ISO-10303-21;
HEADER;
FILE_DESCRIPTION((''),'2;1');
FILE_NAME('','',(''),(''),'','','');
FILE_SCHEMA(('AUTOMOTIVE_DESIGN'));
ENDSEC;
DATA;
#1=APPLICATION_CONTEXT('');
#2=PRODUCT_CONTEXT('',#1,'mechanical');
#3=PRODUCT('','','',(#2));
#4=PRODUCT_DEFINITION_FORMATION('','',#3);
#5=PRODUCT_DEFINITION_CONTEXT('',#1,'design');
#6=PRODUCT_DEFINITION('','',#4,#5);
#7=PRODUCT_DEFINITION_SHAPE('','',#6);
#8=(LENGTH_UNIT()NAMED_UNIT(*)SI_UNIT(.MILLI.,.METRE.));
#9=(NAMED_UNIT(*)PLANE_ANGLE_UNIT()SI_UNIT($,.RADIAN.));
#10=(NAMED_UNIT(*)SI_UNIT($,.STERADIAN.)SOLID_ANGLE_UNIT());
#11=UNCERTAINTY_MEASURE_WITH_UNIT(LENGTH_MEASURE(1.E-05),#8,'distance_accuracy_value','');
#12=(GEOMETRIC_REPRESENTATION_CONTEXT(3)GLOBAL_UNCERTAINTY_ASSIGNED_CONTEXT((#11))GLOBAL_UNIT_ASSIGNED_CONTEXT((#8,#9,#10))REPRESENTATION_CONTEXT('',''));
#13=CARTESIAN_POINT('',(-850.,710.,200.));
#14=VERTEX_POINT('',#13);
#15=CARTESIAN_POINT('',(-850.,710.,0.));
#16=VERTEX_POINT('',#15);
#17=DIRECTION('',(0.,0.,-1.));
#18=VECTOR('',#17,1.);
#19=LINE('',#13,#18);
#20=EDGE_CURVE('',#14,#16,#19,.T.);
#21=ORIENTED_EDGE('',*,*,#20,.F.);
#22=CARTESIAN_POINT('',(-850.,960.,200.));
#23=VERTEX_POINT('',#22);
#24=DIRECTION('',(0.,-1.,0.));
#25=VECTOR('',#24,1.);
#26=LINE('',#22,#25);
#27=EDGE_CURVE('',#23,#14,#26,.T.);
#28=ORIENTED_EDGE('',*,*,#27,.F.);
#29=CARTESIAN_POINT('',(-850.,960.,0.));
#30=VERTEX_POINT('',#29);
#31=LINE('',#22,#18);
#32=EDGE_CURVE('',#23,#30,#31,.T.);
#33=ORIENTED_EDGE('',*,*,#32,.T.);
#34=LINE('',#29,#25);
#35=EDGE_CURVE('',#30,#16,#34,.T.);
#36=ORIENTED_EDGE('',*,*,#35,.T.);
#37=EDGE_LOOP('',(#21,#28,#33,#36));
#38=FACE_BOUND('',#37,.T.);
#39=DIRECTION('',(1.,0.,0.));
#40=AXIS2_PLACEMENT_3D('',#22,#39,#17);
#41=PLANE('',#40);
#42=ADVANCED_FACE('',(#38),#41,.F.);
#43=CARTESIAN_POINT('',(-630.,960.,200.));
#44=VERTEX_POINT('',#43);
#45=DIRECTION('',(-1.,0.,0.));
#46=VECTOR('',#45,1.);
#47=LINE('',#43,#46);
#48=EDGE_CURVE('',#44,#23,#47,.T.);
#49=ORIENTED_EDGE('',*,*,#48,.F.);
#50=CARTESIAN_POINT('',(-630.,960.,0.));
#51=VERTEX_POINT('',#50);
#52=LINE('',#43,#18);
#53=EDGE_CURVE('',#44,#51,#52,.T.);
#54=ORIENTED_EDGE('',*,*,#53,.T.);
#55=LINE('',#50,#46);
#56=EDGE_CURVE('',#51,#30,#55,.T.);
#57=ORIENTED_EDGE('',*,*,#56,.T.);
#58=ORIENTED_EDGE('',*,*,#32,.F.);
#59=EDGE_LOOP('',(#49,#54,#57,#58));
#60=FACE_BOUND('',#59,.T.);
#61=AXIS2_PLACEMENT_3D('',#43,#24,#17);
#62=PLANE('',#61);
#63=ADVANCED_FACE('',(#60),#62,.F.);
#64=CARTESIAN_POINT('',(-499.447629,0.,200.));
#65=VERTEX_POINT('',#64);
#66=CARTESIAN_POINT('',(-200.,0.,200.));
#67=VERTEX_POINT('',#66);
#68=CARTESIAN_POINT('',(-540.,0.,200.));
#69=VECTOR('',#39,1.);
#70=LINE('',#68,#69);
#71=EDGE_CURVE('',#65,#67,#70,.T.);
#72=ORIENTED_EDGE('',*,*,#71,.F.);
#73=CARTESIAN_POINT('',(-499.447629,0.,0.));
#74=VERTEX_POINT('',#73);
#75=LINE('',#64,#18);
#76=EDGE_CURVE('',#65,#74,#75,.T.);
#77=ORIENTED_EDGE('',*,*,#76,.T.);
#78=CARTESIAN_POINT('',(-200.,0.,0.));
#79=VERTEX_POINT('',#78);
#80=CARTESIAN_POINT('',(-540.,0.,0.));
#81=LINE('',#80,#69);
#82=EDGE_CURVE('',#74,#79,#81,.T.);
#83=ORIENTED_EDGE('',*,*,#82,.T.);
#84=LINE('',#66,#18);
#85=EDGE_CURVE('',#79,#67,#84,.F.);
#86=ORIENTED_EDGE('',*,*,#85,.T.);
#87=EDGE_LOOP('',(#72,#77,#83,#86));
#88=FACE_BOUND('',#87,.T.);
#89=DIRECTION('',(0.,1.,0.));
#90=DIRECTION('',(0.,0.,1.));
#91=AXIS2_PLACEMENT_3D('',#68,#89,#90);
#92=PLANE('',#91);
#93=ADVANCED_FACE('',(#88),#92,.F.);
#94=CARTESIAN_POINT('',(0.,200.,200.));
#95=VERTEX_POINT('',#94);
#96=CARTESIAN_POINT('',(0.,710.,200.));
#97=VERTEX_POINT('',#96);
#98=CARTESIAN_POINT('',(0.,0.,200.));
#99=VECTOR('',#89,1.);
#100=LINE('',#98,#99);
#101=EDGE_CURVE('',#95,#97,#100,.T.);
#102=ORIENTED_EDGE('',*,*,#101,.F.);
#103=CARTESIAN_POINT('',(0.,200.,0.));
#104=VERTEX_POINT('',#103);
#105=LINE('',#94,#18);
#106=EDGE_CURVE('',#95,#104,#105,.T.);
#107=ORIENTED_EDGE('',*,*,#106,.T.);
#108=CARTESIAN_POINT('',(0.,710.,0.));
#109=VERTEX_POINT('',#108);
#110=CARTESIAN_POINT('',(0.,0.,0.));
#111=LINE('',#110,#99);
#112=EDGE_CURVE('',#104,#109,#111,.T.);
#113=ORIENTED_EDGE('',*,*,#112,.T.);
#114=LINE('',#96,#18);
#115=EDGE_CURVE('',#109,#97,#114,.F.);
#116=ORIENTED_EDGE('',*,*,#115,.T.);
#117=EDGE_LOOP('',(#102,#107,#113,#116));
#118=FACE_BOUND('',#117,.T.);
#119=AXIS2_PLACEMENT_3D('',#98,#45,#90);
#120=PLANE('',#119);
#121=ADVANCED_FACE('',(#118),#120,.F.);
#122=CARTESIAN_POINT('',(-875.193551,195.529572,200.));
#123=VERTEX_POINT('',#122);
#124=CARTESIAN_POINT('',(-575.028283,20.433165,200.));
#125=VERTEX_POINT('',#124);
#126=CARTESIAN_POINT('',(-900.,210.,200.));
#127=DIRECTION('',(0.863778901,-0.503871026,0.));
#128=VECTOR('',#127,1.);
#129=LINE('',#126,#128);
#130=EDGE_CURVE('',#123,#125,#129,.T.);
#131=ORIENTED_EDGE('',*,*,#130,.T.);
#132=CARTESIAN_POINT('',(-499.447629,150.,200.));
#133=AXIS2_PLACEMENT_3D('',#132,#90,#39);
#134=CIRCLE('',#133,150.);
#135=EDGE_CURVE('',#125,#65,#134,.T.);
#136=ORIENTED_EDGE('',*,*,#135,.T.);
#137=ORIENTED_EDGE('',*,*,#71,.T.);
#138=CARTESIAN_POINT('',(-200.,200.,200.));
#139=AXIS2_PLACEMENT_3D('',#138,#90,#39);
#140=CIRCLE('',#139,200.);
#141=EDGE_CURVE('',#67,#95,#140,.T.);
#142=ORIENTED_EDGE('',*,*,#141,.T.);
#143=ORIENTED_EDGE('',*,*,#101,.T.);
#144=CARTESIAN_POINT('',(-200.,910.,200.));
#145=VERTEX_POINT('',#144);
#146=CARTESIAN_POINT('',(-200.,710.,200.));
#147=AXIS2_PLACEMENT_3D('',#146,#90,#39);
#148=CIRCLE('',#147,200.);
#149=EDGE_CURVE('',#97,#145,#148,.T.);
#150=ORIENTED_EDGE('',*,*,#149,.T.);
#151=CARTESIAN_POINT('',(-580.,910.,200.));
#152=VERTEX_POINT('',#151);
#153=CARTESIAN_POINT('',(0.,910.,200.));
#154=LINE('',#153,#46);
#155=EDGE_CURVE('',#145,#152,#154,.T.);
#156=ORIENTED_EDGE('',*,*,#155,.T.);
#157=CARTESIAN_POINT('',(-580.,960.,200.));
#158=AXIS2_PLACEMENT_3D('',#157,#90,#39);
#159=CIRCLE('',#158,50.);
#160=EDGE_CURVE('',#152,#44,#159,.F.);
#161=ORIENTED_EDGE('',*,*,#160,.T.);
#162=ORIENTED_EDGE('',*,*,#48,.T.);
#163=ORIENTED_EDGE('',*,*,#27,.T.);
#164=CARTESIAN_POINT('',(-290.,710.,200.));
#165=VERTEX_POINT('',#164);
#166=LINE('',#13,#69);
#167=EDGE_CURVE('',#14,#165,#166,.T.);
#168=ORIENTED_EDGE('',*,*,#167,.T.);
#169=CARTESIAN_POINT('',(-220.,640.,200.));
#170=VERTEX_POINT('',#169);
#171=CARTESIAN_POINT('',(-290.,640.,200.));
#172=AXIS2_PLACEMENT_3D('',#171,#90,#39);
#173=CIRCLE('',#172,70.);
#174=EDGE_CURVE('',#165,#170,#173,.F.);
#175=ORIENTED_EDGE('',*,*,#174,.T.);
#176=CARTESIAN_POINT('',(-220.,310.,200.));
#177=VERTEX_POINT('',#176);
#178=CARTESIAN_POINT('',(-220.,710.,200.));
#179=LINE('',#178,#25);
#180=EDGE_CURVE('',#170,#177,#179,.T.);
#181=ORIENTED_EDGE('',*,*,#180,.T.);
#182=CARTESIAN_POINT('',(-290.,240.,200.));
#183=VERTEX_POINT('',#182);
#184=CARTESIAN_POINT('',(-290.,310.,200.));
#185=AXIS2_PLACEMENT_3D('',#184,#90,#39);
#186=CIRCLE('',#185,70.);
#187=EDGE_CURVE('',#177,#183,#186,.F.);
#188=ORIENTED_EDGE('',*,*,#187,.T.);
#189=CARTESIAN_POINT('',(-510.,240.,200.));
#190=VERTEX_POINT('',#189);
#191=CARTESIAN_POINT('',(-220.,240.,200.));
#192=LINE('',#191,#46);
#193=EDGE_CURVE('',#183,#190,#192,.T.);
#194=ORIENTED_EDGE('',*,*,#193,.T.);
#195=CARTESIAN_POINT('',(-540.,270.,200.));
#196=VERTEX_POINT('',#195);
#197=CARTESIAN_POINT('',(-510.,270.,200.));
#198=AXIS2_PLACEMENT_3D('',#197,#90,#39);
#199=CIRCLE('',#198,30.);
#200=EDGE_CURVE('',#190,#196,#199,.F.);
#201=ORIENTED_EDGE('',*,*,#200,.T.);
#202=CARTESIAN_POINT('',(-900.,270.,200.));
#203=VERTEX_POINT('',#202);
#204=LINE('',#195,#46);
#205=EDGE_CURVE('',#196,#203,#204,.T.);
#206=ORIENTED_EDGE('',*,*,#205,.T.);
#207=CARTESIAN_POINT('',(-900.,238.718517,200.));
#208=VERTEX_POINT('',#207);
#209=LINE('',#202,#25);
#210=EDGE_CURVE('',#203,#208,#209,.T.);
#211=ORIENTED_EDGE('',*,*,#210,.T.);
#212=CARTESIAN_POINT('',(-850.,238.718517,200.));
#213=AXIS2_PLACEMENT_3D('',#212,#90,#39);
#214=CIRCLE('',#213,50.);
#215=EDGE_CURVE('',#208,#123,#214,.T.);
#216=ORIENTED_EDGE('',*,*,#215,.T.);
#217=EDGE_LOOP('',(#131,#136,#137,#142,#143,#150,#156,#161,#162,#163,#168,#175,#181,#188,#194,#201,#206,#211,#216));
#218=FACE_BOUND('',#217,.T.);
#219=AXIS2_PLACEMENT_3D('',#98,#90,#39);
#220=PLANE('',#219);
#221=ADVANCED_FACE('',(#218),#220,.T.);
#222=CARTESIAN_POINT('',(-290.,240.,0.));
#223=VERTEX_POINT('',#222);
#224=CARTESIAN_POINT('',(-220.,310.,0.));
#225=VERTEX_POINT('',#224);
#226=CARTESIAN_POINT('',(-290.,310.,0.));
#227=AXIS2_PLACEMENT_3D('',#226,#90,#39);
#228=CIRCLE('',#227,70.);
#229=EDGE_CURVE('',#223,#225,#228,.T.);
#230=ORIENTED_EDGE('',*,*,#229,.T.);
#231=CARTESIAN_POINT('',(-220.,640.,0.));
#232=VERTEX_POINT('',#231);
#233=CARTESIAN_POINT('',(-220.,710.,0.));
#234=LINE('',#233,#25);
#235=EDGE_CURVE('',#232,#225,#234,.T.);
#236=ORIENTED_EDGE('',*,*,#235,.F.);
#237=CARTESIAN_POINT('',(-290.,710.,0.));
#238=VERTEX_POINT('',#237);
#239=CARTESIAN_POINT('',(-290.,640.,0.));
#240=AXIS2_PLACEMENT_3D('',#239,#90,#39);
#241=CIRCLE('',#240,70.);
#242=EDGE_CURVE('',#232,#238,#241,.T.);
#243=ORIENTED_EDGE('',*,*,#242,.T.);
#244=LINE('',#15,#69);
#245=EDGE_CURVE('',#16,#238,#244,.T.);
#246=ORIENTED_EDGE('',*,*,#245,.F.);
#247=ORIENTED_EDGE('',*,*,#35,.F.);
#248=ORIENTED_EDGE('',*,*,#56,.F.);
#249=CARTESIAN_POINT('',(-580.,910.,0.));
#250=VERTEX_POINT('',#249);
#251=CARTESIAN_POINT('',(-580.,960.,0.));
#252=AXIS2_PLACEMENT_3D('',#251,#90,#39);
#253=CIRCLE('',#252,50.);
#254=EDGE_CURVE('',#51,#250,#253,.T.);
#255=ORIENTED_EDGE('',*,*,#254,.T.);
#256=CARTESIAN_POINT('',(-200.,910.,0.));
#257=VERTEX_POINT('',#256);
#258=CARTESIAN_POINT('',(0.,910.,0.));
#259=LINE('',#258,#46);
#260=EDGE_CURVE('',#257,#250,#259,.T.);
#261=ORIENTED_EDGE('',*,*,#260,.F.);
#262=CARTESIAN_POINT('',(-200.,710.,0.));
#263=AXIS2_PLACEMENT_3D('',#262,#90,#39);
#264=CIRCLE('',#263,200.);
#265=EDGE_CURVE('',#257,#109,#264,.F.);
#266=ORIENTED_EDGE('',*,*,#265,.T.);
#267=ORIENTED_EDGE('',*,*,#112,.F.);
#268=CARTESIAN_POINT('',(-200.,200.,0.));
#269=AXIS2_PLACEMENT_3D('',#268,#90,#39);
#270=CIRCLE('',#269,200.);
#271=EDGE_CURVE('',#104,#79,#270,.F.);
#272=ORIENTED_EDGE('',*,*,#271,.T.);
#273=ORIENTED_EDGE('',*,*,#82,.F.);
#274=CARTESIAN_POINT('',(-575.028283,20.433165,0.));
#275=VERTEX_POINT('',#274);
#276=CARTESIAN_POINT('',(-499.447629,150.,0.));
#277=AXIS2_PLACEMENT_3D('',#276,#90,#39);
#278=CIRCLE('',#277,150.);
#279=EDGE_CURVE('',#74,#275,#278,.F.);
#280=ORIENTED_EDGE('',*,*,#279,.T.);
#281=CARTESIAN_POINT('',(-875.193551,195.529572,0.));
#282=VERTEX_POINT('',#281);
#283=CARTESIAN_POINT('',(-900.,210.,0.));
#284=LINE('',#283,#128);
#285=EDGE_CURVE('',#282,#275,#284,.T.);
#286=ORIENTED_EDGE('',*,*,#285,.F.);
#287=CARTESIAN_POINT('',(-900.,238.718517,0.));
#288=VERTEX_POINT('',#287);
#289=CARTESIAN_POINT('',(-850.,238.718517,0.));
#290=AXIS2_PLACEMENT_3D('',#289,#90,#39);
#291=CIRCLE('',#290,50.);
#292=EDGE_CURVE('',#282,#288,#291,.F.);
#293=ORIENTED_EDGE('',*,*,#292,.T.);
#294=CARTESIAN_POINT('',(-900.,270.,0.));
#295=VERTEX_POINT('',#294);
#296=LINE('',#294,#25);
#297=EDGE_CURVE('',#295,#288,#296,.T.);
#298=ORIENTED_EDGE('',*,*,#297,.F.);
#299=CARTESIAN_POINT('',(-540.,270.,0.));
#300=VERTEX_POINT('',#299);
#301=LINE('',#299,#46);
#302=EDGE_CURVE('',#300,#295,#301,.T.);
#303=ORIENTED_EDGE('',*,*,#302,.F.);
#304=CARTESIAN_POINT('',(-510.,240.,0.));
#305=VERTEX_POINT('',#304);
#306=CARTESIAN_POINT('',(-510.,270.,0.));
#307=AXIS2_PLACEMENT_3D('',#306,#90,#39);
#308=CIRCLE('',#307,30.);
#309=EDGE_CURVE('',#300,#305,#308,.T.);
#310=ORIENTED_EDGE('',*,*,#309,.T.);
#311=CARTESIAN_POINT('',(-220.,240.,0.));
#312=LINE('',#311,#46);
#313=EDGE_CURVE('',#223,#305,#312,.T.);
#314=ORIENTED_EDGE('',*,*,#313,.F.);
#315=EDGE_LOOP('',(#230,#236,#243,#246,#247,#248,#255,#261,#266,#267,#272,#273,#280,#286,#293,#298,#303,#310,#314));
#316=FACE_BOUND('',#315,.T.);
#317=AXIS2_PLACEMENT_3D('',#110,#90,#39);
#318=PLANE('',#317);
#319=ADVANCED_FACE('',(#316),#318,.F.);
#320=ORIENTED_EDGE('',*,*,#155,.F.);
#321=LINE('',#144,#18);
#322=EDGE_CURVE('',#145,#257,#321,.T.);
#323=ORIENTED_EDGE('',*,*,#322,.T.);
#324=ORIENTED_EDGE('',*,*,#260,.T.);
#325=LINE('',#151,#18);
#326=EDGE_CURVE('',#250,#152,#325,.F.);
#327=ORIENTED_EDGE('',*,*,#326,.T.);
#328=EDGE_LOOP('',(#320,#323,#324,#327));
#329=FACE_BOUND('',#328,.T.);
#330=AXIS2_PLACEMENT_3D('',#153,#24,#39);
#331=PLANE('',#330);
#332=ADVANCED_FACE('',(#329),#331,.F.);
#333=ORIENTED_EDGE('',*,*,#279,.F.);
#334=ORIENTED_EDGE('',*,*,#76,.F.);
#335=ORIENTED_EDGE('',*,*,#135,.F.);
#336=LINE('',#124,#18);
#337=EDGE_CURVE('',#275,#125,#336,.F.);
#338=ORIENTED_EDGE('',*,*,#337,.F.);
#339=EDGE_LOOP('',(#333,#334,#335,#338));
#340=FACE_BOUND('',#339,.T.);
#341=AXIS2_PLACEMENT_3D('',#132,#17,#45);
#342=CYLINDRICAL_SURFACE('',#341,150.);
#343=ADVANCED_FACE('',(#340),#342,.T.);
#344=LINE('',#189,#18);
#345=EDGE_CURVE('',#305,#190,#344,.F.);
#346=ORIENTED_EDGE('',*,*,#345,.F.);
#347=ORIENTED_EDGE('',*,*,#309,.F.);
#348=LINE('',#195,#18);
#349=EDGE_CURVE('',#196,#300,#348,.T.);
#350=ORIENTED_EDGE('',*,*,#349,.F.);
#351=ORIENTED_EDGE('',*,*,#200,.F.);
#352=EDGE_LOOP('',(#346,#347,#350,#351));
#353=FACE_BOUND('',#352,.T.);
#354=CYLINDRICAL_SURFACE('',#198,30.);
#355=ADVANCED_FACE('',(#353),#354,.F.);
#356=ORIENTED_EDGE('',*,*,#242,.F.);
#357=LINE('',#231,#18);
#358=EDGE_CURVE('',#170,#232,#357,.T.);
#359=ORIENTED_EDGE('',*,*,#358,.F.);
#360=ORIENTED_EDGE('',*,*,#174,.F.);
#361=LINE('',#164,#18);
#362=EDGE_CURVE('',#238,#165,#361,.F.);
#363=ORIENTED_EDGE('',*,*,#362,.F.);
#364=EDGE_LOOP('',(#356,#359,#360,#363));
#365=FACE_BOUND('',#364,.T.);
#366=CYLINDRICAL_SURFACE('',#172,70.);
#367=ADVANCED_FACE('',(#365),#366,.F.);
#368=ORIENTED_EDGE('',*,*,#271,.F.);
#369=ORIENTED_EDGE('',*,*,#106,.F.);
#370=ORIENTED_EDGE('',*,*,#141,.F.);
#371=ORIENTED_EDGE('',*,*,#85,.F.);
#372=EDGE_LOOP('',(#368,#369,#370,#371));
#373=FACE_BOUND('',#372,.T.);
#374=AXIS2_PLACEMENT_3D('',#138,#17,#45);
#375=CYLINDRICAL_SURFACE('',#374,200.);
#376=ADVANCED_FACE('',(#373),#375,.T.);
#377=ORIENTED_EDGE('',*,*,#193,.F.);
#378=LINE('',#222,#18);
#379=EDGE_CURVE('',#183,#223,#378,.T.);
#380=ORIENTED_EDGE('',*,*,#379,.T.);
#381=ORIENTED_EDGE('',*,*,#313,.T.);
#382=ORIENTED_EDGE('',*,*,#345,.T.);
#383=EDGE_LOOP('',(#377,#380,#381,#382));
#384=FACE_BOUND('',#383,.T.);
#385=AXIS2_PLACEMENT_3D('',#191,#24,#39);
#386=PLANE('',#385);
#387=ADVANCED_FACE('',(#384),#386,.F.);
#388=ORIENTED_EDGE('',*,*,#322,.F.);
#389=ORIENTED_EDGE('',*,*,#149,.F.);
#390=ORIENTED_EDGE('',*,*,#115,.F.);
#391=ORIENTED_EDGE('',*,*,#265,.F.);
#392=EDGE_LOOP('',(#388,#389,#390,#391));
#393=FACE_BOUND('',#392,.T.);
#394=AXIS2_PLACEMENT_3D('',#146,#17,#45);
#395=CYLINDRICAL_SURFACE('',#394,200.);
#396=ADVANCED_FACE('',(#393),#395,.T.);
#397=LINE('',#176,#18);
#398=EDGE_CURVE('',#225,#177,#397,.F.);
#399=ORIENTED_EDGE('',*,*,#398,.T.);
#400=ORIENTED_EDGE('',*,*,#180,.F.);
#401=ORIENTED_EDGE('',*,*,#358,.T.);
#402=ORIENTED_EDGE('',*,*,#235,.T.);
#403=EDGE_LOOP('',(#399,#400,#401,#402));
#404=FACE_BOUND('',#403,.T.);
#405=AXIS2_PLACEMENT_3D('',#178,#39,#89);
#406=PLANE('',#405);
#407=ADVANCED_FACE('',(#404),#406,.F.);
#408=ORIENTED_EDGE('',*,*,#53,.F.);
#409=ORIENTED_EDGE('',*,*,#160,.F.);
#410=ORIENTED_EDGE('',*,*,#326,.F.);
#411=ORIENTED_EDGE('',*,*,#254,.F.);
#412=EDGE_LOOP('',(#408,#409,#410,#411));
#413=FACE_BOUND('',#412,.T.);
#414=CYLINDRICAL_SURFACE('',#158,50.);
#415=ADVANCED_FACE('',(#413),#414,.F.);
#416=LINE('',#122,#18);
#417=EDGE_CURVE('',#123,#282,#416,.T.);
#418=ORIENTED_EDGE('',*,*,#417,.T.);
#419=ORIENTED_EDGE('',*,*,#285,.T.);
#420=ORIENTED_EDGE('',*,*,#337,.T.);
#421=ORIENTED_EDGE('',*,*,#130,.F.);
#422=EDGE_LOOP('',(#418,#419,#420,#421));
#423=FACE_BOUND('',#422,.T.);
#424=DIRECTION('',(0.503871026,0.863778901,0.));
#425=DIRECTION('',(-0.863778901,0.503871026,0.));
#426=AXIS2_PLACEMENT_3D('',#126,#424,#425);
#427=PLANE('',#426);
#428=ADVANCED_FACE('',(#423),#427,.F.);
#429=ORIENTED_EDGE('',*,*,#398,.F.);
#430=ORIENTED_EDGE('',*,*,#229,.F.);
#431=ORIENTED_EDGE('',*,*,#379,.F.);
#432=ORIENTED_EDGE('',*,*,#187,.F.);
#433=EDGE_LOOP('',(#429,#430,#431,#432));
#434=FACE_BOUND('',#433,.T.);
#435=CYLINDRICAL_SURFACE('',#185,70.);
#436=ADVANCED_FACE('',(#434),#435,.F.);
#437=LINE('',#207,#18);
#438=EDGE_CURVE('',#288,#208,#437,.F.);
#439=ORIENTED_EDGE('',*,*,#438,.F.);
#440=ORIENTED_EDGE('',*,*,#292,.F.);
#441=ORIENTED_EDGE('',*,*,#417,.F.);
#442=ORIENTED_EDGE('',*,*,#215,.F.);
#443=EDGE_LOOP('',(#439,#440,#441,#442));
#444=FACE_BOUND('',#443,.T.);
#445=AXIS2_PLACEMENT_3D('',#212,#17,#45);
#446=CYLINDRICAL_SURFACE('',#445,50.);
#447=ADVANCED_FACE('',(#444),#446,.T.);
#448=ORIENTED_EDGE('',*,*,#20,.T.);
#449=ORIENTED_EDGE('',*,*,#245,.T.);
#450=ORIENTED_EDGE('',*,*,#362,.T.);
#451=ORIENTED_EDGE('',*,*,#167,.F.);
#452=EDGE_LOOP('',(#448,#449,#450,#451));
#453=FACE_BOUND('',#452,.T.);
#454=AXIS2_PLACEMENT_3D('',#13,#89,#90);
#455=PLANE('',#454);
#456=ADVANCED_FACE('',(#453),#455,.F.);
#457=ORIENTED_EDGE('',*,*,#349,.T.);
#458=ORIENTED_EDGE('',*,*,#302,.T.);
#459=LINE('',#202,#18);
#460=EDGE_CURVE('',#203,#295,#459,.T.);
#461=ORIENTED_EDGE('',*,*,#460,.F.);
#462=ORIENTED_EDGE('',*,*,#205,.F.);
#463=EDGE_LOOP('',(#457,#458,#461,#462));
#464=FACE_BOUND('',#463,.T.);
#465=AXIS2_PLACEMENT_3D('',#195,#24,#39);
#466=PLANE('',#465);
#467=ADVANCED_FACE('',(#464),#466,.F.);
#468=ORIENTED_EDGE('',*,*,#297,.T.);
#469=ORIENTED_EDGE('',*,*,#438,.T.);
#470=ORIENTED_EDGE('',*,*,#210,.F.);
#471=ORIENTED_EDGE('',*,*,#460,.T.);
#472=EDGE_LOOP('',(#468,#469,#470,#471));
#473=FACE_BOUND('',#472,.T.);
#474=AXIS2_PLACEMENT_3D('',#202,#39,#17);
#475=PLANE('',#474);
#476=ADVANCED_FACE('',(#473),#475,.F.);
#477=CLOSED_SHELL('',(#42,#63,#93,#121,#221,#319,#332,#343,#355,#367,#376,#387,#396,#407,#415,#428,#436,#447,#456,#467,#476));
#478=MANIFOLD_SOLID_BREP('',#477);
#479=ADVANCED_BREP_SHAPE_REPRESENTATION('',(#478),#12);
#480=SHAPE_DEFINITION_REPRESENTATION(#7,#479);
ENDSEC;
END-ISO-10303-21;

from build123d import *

# Parameters (mm, degrees)
RESSALTO_EXTRUS_O1_DEPTH = 200
FILETE1_R                = 200
FILETE2_R                = 200
FILETE3_R                = 70
FILETE4_R                = 70
FILETE5_R                = 30
FILETE6_R                = 50
FILETE7_R                = 50
FILETE8_R                = 150


with BuildPart() as part:
    # Esboço1 → Ressalto-extrusão1 (new body)
    with BuildSketch(Plane.XY):
        Polygon((0, 0), (0, 910), (-630, 910), (-630, 960), (-850, 960), (-850, 710), (-220, 710), (-220, 240), (-540, 240), (-540, 270), (-900, 270), (-900, 210), (-540, 0), align=None)
    extrude(amount=RESSALTO_EXTRUS_O1_DEPTH)

    # Filete1
    filete1_edges = [part.edges().sort_by_distance(p)[0] for p in [
        (0, 910, 100),
    ]]
    fillet(filete1_edges, radius=FILETE1_R)

    # Filete2
    filete2_edges = [part.edges().sort_by_distance(p)[0] for p in [
        (0, 0, 100),
    ]]
    fillet(filete2_edges, radius=FILETE2_R)

    # Filete3
    filete3_edges = [part.edges().sort_by_distance(p)[0] for p in [
        (-220, 710, 100),
    ]]
    fillet(filete3_edges, radius=FILETE3_R)

    # Filete4
    filete4_edges = [part.edges().sort_by_distance(p)[0] for p in [
        (-220, 240, 100),
    ]]
    fillet(filete4_edges, radius=FILETE4_R)

    # Filete5
    filete5_edges = [part.edges().sort_by_distance(p)[0] for p in [
        (-540, 240, 100),
    ]]
    fillet(filete5_edges, radius=FILETE5_R - 0.0001)  # a hair under: the kernel refuses the full size

    # Filete6
    filete6_edges = [part.edges().sort_by_distance(p)[0] for p in [
        (-630, 910, 100),
    ]]
    fillet(filete6_edges, radius=FILETE6_R - 0.0001)  # a hair under: the kernel refuses the full size

    # Filete7
    filete7_edges = [part.edges().sort_by_distance(p)[0] for p in [
        (-900, 210, 100),
    ]]
    fillet(filete7_edges, radius=FILETE7_R)

    # Filete8
    filete8_edges = [part.edges().sort_by_distance(p)[0] for p in [
        (-540, 0, 100),
    ]]
    fillet(filete8_edges, radius=FILETE8_R)


solid = part.part
